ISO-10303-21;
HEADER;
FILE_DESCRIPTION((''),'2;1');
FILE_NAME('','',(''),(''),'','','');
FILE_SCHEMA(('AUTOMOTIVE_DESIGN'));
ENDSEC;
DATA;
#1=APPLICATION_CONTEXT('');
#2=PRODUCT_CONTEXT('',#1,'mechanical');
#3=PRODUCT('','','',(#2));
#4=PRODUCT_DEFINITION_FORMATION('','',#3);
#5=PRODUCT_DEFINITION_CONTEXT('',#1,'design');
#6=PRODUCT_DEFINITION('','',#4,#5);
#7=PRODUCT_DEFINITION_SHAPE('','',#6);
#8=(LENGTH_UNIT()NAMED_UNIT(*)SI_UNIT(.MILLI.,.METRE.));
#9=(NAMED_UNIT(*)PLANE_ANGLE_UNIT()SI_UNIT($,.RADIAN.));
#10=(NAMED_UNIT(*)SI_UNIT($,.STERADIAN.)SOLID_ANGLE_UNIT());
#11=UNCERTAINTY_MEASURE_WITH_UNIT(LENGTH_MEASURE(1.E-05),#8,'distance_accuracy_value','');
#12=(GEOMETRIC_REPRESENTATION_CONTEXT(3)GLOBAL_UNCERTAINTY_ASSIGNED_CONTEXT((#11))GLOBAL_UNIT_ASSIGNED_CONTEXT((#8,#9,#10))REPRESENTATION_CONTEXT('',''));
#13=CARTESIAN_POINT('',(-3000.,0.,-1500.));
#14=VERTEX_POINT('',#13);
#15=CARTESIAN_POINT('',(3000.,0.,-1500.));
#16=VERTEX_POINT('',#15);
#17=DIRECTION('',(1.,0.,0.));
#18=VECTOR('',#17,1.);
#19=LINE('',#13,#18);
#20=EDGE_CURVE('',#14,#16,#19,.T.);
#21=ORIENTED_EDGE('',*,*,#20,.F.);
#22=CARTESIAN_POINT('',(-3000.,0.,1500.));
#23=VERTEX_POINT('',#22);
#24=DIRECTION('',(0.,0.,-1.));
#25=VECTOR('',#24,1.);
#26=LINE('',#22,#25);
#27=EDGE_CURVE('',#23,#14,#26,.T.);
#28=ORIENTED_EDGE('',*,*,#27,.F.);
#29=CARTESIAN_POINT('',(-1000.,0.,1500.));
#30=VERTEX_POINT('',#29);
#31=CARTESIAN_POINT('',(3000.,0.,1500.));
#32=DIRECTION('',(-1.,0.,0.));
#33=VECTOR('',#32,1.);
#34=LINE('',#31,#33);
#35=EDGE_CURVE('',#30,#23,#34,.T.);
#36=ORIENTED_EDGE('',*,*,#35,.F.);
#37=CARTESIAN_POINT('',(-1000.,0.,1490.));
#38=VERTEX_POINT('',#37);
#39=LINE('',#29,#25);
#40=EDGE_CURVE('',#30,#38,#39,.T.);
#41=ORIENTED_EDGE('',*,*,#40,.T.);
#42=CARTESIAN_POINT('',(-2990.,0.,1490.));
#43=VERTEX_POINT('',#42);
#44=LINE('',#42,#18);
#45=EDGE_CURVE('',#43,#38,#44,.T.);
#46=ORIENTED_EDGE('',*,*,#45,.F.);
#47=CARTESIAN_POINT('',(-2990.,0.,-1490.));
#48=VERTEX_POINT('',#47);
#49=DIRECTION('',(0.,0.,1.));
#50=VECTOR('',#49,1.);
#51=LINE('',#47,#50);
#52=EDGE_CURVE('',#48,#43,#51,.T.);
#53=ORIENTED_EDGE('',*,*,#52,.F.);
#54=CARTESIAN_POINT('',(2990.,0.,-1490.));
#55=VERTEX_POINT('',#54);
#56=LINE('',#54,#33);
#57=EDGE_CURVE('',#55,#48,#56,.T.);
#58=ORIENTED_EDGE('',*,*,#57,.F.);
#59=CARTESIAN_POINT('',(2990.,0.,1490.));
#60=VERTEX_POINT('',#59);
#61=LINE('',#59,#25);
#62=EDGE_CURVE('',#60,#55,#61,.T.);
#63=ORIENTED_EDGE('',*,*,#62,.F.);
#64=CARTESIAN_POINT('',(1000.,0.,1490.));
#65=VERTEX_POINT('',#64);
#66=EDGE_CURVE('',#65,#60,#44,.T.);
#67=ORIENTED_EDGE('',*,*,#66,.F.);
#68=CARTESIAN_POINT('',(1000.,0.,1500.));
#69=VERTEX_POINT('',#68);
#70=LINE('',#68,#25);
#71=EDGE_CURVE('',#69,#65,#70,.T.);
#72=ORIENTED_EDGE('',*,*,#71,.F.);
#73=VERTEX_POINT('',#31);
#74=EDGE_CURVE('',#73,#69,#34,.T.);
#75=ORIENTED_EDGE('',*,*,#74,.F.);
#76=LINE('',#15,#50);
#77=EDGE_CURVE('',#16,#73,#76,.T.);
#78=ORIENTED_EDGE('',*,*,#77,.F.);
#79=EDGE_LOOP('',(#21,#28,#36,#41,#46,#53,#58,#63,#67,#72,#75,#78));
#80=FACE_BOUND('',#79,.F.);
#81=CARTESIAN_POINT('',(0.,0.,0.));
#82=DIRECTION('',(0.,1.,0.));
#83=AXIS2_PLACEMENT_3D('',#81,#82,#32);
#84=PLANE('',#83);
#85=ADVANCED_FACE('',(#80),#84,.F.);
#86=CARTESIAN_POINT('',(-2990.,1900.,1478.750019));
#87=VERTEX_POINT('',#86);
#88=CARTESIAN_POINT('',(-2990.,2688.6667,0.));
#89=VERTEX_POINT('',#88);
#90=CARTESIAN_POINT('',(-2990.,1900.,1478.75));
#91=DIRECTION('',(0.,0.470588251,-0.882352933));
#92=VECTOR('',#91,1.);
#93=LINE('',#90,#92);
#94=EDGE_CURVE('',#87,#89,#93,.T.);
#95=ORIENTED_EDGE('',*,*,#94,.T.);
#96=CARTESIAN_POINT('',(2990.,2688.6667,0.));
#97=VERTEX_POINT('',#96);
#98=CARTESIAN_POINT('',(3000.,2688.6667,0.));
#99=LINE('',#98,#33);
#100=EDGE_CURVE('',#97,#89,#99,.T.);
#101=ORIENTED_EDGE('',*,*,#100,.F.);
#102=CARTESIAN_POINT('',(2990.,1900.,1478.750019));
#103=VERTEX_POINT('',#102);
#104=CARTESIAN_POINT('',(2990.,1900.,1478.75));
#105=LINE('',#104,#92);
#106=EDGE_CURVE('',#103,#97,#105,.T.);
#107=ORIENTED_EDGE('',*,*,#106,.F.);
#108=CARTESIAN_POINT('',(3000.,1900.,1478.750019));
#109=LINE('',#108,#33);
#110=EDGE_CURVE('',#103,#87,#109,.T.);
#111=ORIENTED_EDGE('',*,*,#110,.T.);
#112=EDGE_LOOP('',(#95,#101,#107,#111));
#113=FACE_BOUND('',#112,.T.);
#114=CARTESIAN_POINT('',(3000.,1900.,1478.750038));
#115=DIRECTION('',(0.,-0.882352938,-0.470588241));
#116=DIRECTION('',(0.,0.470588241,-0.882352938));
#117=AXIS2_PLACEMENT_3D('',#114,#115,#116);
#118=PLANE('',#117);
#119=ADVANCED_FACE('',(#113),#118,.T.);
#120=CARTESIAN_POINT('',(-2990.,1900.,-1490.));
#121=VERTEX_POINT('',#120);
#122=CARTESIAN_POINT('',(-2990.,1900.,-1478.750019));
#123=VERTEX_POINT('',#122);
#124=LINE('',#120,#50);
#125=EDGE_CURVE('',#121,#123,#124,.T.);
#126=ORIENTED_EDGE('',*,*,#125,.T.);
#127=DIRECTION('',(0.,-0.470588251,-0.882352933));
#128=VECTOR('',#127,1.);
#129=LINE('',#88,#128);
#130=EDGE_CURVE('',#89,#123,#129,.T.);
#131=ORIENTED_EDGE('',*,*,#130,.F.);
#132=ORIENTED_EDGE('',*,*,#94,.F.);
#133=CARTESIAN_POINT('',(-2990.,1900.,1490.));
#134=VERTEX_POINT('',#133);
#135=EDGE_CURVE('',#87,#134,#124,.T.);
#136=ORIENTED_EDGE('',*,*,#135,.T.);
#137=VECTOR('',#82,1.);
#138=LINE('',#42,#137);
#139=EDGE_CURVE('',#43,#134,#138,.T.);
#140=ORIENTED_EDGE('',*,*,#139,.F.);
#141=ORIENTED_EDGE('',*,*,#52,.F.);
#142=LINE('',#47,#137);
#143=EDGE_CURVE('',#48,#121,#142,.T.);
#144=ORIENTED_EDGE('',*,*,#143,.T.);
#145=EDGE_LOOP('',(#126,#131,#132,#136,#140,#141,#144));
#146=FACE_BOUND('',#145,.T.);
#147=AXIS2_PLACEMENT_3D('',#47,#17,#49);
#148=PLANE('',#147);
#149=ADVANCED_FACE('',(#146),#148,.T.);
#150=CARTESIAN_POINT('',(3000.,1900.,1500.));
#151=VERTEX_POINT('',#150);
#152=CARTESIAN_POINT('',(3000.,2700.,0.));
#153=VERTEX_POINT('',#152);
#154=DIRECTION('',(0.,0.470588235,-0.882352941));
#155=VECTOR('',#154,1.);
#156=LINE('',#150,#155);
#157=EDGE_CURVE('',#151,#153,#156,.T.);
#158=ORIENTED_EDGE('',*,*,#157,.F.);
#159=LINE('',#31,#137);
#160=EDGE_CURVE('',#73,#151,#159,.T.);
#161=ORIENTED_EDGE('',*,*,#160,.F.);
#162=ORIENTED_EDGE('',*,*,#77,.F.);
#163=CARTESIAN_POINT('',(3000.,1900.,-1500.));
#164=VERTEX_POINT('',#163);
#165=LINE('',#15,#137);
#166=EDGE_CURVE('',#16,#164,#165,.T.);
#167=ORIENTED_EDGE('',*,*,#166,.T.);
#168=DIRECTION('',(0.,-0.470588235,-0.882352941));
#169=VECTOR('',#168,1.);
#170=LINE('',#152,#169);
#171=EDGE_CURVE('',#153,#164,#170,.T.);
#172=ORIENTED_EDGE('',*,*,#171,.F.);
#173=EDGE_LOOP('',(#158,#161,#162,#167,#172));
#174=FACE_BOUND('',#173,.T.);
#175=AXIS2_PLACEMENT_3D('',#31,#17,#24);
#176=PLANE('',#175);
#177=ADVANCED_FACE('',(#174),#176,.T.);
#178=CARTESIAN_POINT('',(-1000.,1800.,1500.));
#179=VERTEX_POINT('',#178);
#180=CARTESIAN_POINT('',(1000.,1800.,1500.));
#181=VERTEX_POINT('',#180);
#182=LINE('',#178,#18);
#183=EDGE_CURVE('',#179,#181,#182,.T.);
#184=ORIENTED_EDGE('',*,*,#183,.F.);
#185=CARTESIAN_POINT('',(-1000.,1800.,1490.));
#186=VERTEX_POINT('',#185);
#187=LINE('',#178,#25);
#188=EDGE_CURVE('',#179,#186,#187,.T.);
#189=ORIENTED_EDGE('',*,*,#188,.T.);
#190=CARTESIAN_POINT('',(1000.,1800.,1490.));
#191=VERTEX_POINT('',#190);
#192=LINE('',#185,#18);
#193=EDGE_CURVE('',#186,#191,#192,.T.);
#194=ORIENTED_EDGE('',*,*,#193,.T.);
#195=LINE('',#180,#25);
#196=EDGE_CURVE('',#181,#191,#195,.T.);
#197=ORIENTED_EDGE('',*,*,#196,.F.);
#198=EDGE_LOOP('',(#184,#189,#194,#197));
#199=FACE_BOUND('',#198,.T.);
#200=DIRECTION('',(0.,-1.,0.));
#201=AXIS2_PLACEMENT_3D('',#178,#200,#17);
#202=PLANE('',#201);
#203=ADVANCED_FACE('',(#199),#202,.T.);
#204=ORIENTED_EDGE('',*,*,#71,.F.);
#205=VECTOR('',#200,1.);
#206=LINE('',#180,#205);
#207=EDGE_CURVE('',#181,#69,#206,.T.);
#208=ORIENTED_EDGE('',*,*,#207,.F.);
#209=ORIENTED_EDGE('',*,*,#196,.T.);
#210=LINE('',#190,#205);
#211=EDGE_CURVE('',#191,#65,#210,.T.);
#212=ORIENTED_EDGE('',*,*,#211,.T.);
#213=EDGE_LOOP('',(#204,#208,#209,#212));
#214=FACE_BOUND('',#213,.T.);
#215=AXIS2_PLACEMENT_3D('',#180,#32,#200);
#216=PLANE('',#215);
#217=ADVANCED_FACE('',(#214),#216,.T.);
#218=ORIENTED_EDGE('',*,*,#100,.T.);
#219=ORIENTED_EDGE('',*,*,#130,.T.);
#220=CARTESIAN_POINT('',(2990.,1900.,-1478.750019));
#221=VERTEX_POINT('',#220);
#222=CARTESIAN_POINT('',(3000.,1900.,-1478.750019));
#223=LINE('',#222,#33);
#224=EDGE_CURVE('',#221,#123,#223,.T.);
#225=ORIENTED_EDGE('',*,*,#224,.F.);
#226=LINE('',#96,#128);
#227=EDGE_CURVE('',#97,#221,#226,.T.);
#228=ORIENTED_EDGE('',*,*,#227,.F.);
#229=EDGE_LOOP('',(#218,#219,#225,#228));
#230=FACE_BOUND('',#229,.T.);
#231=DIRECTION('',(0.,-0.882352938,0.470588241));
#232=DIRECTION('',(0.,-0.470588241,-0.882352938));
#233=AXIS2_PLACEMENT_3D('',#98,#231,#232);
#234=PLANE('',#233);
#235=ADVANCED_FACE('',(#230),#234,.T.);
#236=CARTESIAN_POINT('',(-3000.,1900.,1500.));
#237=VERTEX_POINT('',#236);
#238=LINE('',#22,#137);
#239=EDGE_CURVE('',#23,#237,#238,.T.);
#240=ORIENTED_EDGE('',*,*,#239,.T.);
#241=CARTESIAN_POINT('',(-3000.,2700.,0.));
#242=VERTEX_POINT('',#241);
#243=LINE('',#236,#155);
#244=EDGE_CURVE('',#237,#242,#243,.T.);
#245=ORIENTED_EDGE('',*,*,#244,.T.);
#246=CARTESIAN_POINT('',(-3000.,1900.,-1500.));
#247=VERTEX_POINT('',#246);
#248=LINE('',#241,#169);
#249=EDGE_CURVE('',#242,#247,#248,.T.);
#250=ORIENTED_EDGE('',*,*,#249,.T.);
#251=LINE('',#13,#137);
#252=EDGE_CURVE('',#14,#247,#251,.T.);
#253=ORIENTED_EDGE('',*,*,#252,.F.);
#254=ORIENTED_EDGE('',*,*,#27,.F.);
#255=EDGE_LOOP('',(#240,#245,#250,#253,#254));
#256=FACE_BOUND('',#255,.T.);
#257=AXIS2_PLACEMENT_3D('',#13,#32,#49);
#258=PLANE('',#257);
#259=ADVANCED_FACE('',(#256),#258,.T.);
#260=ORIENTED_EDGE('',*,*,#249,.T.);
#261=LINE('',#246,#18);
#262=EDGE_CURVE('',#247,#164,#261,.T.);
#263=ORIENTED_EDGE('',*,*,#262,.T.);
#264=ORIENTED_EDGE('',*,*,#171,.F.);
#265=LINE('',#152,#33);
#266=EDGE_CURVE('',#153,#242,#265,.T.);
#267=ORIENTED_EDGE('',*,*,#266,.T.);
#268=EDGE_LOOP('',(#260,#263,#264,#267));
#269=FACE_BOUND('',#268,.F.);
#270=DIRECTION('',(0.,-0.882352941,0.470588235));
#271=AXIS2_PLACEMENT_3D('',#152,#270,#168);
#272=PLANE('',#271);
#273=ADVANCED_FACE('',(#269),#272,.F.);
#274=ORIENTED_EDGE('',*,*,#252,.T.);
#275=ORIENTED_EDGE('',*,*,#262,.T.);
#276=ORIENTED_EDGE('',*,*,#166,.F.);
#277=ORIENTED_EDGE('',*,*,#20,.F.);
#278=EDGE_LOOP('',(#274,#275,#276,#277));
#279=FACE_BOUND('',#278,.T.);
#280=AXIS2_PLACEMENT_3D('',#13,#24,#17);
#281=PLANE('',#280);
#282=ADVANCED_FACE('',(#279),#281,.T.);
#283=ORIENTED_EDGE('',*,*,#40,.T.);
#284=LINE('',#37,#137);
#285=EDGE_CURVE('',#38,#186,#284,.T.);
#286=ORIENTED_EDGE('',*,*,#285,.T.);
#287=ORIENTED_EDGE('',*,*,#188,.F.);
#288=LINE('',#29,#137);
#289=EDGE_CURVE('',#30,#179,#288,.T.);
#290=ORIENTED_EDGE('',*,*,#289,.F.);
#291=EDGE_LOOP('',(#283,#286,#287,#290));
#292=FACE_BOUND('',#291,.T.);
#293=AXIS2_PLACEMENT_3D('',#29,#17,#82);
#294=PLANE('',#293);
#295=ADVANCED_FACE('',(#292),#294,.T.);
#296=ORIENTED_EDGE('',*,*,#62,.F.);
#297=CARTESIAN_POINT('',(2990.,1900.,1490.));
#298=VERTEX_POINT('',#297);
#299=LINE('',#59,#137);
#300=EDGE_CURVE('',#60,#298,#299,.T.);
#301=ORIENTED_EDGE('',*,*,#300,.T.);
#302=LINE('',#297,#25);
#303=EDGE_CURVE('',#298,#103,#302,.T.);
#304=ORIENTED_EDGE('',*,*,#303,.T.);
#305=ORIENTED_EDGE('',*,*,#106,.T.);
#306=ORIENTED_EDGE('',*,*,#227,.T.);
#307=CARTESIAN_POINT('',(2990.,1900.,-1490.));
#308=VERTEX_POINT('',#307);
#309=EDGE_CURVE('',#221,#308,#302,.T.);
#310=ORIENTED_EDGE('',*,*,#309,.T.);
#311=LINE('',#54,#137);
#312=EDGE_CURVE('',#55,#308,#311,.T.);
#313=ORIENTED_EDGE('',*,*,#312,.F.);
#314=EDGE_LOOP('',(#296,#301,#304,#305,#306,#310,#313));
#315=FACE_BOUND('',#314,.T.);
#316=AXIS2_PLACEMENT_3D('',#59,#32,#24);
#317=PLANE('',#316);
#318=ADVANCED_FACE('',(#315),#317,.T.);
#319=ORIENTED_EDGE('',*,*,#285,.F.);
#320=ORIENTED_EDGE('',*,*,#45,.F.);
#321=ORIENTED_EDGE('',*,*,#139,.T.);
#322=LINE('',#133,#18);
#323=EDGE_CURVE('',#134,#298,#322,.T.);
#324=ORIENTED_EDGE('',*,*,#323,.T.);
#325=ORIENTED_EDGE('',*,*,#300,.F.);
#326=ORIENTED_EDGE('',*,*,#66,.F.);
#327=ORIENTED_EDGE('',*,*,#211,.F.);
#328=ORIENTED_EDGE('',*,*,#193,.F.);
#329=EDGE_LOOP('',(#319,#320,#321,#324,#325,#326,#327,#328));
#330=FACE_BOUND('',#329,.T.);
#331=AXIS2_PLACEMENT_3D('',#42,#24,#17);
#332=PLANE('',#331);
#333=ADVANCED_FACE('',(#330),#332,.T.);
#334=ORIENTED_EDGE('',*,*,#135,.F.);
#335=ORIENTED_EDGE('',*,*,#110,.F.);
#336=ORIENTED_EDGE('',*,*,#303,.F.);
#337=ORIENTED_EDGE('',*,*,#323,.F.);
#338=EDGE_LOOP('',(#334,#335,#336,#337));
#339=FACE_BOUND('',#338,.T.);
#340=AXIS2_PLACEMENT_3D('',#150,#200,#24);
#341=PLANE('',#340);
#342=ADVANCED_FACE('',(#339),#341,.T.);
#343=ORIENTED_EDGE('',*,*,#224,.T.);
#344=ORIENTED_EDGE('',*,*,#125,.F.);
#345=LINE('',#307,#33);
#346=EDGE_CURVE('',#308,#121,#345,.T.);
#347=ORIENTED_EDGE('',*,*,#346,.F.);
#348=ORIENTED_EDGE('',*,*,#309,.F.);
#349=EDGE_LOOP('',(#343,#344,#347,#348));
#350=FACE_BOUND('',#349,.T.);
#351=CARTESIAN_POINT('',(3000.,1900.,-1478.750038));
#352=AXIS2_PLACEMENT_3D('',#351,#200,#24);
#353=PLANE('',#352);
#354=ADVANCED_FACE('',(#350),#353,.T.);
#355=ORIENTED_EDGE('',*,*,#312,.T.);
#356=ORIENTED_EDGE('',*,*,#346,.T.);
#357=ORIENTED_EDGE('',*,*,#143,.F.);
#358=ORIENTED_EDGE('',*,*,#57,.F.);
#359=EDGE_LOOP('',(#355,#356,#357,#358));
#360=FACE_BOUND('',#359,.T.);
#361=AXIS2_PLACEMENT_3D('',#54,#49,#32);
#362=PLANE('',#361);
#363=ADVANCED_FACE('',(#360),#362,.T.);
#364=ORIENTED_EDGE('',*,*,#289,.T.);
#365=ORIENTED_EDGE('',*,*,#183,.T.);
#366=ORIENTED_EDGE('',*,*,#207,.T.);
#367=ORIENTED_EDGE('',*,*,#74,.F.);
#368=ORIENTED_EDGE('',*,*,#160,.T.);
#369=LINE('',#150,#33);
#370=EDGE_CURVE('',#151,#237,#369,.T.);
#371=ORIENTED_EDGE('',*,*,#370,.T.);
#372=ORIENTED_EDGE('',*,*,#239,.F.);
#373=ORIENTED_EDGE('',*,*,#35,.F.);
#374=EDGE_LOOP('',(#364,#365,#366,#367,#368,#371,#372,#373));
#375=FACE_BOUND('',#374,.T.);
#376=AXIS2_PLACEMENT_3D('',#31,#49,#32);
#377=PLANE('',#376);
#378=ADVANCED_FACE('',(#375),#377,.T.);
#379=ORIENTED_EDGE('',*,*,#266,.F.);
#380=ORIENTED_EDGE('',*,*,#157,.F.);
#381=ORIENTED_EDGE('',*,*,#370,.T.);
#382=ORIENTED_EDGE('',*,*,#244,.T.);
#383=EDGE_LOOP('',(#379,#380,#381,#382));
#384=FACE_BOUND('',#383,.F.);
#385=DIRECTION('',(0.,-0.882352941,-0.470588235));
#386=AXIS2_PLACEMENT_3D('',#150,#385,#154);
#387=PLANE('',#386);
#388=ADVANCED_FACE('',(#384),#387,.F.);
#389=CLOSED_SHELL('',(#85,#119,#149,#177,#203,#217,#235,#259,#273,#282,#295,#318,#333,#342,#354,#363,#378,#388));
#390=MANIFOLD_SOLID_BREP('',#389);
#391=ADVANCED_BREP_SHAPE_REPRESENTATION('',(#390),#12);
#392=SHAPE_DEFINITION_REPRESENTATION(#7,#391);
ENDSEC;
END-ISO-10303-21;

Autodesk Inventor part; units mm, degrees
ref_plane "YZ Plane" through (0, 0, 0) normal (1, 0, 0) x (0, 1, 0)
ref_plane "XZ Plane" through (0, 0, 0) normal (0, 1, 0) x (-1, 0, 0)
ref_plane "XY Plane" through (0, 0, 0) normal (0, 0, 1) x (1, 0, 0)
sketch "Sketch1" plane through (0, 0, 0) normal (0, 1, 0) x (-1, 0, 0)
  line L0 (3000, -1500) -> (-3000, -1500)
  line L1 (-3000, -1500) -> (-3000, 1500)
  line L2 (-3000, 1500) -> (3000, 1500)
  line L3 (3000, 1500) -> (3000, -1500)
  line L4 (2990, 1490) -> (-2990, 1490)
  line L5 (-2990, 1490) -> (-2990, -1490)
  line L6 (-2990, -1490) -> (2990, -1490)
  line L7 (2990, -1490) -> (2990, 1490)
  point P0 (0, 0)
  point P1 (-3000, 0)
  point P2 (0, -1500)
  dimension "d0" = 3000
  dimension "d1" = 6000
  dimension "d2" = 10
extrude "Extrusion1" add sketch "Sketch1" along normal blind 1900
sketch "Sketch2" plane through (3000, 0, 1500) normal (1, 0, 0) x (0, 0, -1)
  line L0 (0, 1900) -> (3000, 1900) projected
  line L1 (0, 0) -> (0, 1900) projected
  line L2 (0, 1900) -> (1500, 2700)
  line L3 (3000, 0) -> (3000, 1900) projected
  line L4 (1500, 2700) -> (3000, 1900)
  line L5 (4.7059, 1891.1765) -> (1500, 2688.6667)
  line L6 (1500, 2688.6667) -> (2995.2941, 1891.1765)
  point P0 (1500, 0)
  point P1 (2990, 1900)
  point P2 (1500, 1900)
  point P3 (21.25, 1900)
  point P4 (2978.75, 1900)
  dimension "d5" = 1700
  dimension "d6" = 10
extrude "Extrusion2" add sketch "Sketch2" against normal up to surface (6000 mm away) contours L2 L4 L0 L6 L5
sketch "Sketch3" plane through (-3000, 0, -1500) normal (-1, 0, 0) x (0, 0, 1)
  line L0 (21.25, 1900) -> (2978.75, 1900) projected
  line L1 (1500, 2688.6667) -> (21.25, 1900) projected
  line L2 (2978.75, 1900) -> (1500, 2688.6667) projected
  point P0 (1500, 0)
extrude "Extrusion3" add sketch "Sketch3" against normal blind 10
sketch "Sketch4" plane through (3000, 0, 1500) normal (1, 0, 0) x (0, 0, -1)
  line L0 (21.25, 1900) -> (1500, 2688.6667) projected
  line L1 (21.25, 1900) -> (2978.75, 1900) projected
  line L2 (1500, 2688.6667) -> (2978.75, 1900) projected
  point P0 (1500, 0)
extrude "Extrusion4" add sketch "Sketch4" against normal blind 10
sketch "Sketch5" plane through (-3000, 0, 1500) normal (0, 0, 1) x (1, 0, 0)
  line L0 (2000, 1800) -> (4000, 1800)
  line L1 (4000, 1800) -> (4000, 0)
  line L2 (4000, 0) -> (2000, 0)
  line L3 (2000, 0) -> (2000, 1800)
  line L4 (0, 0) -> (6000, 0) projected
  line L5 (0, 1900) -> (6000, 1900) projected
  point P0 (3000, 0)
  point P1 (3000, 0)
  point P2 (3000, 0)
  dimension "d13" = 100
  dimension "d14" = 2000
extrude "Extrusion5" cut sketch "Sketch5" against normal up to surface (10 mm away)
properties part number "BungaCamp-CostcoCarport"
